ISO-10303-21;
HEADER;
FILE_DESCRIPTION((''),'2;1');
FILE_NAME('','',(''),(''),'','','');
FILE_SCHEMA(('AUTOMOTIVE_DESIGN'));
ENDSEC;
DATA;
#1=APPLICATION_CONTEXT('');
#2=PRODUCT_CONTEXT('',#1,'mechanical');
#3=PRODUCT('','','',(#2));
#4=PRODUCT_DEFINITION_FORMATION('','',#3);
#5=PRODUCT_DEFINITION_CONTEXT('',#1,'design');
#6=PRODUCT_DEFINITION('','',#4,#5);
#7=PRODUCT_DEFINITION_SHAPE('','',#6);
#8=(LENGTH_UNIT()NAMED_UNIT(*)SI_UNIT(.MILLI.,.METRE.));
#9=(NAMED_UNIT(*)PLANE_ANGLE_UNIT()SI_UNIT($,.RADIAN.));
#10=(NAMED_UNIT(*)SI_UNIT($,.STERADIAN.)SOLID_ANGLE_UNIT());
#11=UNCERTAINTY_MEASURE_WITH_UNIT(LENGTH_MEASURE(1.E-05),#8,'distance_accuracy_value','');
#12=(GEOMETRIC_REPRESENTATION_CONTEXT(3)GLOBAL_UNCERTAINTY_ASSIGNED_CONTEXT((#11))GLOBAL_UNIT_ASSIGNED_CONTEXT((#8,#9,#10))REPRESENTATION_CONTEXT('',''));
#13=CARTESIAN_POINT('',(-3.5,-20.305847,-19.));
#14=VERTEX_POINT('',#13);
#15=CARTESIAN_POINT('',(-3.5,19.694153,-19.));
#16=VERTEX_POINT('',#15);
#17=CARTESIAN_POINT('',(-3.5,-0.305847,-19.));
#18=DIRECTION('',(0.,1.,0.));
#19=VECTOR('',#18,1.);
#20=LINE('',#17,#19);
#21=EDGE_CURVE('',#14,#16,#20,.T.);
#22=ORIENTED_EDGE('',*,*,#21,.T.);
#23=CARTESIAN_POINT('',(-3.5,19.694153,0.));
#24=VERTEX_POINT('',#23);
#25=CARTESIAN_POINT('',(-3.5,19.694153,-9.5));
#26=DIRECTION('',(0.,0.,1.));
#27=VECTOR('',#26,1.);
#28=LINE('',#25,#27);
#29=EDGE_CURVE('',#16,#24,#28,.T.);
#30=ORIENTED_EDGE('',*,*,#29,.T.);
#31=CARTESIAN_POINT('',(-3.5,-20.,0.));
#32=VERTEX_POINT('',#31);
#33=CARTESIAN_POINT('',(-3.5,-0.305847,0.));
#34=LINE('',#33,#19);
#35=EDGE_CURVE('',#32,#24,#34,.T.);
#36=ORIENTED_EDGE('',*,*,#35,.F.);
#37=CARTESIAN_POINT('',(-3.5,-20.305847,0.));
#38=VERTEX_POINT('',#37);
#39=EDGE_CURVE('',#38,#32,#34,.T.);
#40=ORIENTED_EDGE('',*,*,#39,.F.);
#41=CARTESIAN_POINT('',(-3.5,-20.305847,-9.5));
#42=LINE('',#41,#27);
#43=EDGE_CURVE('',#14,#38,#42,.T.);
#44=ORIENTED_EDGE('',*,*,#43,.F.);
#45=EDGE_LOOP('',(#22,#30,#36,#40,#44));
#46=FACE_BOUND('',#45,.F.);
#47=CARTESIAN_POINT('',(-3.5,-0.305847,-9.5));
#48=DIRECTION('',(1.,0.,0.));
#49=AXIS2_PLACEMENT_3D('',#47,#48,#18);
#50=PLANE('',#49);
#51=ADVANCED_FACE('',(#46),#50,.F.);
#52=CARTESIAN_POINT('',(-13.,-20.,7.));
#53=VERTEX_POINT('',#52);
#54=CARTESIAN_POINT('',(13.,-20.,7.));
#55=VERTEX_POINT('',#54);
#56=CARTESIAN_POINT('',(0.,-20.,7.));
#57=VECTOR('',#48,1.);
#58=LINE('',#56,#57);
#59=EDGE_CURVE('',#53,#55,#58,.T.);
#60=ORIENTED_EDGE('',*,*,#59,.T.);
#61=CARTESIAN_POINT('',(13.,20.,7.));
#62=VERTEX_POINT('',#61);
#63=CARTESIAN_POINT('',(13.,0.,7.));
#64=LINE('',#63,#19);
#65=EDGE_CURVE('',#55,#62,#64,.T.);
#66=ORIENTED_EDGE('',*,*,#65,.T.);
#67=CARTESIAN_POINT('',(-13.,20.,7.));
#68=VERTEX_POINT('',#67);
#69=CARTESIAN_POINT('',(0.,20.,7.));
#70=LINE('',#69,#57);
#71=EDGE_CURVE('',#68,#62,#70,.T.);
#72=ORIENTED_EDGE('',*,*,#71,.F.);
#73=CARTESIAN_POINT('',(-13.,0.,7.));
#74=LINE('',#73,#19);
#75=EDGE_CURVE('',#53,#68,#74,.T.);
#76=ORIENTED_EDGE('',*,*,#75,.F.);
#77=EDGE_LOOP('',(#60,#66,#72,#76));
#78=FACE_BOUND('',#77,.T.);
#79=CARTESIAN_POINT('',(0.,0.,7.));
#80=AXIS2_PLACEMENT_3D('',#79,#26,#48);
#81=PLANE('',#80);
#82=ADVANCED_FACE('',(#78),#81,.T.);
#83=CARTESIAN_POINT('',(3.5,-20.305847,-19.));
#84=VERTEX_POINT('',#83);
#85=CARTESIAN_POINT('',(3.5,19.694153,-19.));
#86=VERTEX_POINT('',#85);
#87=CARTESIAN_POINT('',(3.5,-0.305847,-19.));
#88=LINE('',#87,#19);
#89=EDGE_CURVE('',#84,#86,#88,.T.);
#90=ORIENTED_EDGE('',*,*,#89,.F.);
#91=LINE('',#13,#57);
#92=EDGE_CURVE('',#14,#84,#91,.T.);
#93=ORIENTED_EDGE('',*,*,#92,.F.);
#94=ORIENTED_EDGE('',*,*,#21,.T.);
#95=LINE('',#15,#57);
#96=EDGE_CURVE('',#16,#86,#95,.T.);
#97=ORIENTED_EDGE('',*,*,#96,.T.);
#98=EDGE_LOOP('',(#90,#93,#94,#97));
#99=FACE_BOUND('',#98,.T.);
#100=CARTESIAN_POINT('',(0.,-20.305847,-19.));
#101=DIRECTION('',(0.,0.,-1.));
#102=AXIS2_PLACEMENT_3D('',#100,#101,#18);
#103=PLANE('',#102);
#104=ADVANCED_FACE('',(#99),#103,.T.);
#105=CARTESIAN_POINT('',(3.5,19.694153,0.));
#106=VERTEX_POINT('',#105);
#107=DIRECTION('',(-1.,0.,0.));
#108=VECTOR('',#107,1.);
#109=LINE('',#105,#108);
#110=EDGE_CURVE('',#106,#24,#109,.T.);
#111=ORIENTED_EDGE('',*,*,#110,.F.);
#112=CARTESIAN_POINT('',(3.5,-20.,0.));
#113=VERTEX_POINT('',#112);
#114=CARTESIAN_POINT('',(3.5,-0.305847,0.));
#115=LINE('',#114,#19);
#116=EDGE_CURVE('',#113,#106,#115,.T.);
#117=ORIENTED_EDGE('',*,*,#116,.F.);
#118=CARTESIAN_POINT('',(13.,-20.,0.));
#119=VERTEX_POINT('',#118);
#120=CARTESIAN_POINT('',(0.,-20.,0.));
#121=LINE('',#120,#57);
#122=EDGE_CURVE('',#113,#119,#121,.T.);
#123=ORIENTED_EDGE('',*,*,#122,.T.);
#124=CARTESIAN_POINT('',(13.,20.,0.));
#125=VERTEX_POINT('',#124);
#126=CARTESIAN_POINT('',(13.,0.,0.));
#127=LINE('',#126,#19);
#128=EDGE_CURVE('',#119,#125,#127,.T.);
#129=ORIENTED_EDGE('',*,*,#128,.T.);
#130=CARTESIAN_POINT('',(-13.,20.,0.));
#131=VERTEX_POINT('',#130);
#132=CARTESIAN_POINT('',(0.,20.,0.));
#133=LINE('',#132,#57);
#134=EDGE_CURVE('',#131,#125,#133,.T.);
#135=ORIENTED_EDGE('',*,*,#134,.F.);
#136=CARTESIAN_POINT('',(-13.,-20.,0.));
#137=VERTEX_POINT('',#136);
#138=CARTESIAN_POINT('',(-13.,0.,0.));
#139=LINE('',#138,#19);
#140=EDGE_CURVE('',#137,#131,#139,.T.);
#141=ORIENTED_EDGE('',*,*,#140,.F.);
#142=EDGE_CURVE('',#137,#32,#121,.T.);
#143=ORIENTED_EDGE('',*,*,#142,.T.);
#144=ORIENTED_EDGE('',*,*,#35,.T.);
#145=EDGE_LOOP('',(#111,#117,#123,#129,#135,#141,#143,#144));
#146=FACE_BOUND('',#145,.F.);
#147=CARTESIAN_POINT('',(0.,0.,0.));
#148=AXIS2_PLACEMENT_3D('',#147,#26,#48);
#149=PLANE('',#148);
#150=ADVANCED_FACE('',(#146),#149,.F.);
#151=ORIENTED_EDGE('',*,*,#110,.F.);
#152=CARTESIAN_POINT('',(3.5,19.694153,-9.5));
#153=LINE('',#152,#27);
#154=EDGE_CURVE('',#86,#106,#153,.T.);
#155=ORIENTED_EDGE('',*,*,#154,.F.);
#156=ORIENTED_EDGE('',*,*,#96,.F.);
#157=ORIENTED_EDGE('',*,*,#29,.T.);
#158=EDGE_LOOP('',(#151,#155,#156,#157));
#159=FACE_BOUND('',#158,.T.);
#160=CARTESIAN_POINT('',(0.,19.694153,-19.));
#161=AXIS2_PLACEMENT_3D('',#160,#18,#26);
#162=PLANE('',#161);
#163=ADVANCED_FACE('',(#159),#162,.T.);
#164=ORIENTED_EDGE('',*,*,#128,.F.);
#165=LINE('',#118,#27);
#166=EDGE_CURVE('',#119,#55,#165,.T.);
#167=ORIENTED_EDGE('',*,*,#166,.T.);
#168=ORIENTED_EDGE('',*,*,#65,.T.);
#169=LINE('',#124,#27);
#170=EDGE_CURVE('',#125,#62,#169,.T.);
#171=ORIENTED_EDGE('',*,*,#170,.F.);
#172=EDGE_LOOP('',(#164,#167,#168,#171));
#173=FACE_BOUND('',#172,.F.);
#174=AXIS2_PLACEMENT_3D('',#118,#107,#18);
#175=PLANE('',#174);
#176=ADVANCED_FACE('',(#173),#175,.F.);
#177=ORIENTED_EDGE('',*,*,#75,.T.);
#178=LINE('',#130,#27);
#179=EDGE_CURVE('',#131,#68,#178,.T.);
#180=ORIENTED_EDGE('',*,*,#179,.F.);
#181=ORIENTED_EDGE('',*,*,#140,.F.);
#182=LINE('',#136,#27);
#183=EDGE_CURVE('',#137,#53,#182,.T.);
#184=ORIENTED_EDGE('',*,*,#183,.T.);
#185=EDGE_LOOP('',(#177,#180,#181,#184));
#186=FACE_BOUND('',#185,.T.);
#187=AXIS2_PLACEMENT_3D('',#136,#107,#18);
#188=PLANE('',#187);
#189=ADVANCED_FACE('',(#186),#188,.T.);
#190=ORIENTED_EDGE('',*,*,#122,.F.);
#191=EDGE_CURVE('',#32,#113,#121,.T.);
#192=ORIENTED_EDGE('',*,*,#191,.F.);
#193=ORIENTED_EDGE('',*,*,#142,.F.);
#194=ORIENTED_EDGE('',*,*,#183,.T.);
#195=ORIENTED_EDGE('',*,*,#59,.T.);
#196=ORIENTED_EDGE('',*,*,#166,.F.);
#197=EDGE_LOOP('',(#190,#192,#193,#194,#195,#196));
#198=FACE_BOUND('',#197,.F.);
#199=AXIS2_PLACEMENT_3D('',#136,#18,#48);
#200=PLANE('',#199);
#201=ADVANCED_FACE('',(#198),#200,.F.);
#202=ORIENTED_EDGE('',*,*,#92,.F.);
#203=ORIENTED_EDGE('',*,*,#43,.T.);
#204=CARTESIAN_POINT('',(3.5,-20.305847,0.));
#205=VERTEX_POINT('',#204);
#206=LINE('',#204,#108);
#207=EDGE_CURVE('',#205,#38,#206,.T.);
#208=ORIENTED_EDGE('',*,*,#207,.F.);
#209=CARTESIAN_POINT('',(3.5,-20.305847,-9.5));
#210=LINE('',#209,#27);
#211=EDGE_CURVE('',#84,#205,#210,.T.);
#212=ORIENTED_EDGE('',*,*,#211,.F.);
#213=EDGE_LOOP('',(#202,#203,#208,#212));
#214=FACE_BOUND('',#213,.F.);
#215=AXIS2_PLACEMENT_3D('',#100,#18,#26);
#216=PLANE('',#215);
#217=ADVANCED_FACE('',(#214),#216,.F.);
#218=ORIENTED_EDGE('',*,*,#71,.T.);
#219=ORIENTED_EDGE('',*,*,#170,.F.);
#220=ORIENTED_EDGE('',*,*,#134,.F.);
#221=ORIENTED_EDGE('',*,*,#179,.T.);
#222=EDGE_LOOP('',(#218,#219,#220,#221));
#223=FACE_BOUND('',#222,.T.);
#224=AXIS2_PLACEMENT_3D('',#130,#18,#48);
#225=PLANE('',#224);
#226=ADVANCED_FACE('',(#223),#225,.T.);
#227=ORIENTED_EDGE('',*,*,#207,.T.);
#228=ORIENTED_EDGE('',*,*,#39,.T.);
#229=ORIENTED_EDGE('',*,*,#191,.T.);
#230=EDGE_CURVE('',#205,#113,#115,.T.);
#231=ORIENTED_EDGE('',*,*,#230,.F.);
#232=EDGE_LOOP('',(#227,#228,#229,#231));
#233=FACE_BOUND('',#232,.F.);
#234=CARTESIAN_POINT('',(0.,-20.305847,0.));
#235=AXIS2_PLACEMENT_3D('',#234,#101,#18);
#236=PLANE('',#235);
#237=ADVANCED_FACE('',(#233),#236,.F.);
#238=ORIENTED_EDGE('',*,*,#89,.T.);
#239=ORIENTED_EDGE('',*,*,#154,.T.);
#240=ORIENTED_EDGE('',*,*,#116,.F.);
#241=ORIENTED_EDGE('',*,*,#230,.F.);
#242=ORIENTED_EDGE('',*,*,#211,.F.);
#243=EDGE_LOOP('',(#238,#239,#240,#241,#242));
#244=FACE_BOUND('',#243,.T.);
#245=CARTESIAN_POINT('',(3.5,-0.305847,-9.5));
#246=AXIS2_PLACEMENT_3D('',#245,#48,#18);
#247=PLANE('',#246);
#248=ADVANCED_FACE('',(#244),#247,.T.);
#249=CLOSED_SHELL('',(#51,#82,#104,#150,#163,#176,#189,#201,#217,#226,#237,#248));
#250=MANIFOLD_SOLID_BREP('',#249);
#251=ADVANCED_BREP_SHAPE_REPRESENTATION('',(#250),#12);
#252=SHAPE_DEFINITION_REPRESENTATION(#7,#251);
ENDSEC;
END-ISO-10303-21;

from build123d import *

# Parameters (mm, degrees)
F1_W     = 26
F1_H     = 40
F2_DEPTH = 7
F0_W     = 40
F0_H     = 19
F3_DEPTH = 3.5


with BuildPart() as f2:
    # F1 (on Top) → F2 (new body)
    with BuildSketch(Plane.XY):
        Rectangle(F1_W, F1_H)
    extrude(amount=F2_DEPTH)

    # F0 (on Right) → F3 (join, symmetric)
    with BuildSketch(Plane.YZ):
        with Locations((-0.3058470263, -9.5)):
            Rectangle(F0_W, F0_H)
    extrude(amount=F3_DEPTH, both=True)


solid = f2.part
